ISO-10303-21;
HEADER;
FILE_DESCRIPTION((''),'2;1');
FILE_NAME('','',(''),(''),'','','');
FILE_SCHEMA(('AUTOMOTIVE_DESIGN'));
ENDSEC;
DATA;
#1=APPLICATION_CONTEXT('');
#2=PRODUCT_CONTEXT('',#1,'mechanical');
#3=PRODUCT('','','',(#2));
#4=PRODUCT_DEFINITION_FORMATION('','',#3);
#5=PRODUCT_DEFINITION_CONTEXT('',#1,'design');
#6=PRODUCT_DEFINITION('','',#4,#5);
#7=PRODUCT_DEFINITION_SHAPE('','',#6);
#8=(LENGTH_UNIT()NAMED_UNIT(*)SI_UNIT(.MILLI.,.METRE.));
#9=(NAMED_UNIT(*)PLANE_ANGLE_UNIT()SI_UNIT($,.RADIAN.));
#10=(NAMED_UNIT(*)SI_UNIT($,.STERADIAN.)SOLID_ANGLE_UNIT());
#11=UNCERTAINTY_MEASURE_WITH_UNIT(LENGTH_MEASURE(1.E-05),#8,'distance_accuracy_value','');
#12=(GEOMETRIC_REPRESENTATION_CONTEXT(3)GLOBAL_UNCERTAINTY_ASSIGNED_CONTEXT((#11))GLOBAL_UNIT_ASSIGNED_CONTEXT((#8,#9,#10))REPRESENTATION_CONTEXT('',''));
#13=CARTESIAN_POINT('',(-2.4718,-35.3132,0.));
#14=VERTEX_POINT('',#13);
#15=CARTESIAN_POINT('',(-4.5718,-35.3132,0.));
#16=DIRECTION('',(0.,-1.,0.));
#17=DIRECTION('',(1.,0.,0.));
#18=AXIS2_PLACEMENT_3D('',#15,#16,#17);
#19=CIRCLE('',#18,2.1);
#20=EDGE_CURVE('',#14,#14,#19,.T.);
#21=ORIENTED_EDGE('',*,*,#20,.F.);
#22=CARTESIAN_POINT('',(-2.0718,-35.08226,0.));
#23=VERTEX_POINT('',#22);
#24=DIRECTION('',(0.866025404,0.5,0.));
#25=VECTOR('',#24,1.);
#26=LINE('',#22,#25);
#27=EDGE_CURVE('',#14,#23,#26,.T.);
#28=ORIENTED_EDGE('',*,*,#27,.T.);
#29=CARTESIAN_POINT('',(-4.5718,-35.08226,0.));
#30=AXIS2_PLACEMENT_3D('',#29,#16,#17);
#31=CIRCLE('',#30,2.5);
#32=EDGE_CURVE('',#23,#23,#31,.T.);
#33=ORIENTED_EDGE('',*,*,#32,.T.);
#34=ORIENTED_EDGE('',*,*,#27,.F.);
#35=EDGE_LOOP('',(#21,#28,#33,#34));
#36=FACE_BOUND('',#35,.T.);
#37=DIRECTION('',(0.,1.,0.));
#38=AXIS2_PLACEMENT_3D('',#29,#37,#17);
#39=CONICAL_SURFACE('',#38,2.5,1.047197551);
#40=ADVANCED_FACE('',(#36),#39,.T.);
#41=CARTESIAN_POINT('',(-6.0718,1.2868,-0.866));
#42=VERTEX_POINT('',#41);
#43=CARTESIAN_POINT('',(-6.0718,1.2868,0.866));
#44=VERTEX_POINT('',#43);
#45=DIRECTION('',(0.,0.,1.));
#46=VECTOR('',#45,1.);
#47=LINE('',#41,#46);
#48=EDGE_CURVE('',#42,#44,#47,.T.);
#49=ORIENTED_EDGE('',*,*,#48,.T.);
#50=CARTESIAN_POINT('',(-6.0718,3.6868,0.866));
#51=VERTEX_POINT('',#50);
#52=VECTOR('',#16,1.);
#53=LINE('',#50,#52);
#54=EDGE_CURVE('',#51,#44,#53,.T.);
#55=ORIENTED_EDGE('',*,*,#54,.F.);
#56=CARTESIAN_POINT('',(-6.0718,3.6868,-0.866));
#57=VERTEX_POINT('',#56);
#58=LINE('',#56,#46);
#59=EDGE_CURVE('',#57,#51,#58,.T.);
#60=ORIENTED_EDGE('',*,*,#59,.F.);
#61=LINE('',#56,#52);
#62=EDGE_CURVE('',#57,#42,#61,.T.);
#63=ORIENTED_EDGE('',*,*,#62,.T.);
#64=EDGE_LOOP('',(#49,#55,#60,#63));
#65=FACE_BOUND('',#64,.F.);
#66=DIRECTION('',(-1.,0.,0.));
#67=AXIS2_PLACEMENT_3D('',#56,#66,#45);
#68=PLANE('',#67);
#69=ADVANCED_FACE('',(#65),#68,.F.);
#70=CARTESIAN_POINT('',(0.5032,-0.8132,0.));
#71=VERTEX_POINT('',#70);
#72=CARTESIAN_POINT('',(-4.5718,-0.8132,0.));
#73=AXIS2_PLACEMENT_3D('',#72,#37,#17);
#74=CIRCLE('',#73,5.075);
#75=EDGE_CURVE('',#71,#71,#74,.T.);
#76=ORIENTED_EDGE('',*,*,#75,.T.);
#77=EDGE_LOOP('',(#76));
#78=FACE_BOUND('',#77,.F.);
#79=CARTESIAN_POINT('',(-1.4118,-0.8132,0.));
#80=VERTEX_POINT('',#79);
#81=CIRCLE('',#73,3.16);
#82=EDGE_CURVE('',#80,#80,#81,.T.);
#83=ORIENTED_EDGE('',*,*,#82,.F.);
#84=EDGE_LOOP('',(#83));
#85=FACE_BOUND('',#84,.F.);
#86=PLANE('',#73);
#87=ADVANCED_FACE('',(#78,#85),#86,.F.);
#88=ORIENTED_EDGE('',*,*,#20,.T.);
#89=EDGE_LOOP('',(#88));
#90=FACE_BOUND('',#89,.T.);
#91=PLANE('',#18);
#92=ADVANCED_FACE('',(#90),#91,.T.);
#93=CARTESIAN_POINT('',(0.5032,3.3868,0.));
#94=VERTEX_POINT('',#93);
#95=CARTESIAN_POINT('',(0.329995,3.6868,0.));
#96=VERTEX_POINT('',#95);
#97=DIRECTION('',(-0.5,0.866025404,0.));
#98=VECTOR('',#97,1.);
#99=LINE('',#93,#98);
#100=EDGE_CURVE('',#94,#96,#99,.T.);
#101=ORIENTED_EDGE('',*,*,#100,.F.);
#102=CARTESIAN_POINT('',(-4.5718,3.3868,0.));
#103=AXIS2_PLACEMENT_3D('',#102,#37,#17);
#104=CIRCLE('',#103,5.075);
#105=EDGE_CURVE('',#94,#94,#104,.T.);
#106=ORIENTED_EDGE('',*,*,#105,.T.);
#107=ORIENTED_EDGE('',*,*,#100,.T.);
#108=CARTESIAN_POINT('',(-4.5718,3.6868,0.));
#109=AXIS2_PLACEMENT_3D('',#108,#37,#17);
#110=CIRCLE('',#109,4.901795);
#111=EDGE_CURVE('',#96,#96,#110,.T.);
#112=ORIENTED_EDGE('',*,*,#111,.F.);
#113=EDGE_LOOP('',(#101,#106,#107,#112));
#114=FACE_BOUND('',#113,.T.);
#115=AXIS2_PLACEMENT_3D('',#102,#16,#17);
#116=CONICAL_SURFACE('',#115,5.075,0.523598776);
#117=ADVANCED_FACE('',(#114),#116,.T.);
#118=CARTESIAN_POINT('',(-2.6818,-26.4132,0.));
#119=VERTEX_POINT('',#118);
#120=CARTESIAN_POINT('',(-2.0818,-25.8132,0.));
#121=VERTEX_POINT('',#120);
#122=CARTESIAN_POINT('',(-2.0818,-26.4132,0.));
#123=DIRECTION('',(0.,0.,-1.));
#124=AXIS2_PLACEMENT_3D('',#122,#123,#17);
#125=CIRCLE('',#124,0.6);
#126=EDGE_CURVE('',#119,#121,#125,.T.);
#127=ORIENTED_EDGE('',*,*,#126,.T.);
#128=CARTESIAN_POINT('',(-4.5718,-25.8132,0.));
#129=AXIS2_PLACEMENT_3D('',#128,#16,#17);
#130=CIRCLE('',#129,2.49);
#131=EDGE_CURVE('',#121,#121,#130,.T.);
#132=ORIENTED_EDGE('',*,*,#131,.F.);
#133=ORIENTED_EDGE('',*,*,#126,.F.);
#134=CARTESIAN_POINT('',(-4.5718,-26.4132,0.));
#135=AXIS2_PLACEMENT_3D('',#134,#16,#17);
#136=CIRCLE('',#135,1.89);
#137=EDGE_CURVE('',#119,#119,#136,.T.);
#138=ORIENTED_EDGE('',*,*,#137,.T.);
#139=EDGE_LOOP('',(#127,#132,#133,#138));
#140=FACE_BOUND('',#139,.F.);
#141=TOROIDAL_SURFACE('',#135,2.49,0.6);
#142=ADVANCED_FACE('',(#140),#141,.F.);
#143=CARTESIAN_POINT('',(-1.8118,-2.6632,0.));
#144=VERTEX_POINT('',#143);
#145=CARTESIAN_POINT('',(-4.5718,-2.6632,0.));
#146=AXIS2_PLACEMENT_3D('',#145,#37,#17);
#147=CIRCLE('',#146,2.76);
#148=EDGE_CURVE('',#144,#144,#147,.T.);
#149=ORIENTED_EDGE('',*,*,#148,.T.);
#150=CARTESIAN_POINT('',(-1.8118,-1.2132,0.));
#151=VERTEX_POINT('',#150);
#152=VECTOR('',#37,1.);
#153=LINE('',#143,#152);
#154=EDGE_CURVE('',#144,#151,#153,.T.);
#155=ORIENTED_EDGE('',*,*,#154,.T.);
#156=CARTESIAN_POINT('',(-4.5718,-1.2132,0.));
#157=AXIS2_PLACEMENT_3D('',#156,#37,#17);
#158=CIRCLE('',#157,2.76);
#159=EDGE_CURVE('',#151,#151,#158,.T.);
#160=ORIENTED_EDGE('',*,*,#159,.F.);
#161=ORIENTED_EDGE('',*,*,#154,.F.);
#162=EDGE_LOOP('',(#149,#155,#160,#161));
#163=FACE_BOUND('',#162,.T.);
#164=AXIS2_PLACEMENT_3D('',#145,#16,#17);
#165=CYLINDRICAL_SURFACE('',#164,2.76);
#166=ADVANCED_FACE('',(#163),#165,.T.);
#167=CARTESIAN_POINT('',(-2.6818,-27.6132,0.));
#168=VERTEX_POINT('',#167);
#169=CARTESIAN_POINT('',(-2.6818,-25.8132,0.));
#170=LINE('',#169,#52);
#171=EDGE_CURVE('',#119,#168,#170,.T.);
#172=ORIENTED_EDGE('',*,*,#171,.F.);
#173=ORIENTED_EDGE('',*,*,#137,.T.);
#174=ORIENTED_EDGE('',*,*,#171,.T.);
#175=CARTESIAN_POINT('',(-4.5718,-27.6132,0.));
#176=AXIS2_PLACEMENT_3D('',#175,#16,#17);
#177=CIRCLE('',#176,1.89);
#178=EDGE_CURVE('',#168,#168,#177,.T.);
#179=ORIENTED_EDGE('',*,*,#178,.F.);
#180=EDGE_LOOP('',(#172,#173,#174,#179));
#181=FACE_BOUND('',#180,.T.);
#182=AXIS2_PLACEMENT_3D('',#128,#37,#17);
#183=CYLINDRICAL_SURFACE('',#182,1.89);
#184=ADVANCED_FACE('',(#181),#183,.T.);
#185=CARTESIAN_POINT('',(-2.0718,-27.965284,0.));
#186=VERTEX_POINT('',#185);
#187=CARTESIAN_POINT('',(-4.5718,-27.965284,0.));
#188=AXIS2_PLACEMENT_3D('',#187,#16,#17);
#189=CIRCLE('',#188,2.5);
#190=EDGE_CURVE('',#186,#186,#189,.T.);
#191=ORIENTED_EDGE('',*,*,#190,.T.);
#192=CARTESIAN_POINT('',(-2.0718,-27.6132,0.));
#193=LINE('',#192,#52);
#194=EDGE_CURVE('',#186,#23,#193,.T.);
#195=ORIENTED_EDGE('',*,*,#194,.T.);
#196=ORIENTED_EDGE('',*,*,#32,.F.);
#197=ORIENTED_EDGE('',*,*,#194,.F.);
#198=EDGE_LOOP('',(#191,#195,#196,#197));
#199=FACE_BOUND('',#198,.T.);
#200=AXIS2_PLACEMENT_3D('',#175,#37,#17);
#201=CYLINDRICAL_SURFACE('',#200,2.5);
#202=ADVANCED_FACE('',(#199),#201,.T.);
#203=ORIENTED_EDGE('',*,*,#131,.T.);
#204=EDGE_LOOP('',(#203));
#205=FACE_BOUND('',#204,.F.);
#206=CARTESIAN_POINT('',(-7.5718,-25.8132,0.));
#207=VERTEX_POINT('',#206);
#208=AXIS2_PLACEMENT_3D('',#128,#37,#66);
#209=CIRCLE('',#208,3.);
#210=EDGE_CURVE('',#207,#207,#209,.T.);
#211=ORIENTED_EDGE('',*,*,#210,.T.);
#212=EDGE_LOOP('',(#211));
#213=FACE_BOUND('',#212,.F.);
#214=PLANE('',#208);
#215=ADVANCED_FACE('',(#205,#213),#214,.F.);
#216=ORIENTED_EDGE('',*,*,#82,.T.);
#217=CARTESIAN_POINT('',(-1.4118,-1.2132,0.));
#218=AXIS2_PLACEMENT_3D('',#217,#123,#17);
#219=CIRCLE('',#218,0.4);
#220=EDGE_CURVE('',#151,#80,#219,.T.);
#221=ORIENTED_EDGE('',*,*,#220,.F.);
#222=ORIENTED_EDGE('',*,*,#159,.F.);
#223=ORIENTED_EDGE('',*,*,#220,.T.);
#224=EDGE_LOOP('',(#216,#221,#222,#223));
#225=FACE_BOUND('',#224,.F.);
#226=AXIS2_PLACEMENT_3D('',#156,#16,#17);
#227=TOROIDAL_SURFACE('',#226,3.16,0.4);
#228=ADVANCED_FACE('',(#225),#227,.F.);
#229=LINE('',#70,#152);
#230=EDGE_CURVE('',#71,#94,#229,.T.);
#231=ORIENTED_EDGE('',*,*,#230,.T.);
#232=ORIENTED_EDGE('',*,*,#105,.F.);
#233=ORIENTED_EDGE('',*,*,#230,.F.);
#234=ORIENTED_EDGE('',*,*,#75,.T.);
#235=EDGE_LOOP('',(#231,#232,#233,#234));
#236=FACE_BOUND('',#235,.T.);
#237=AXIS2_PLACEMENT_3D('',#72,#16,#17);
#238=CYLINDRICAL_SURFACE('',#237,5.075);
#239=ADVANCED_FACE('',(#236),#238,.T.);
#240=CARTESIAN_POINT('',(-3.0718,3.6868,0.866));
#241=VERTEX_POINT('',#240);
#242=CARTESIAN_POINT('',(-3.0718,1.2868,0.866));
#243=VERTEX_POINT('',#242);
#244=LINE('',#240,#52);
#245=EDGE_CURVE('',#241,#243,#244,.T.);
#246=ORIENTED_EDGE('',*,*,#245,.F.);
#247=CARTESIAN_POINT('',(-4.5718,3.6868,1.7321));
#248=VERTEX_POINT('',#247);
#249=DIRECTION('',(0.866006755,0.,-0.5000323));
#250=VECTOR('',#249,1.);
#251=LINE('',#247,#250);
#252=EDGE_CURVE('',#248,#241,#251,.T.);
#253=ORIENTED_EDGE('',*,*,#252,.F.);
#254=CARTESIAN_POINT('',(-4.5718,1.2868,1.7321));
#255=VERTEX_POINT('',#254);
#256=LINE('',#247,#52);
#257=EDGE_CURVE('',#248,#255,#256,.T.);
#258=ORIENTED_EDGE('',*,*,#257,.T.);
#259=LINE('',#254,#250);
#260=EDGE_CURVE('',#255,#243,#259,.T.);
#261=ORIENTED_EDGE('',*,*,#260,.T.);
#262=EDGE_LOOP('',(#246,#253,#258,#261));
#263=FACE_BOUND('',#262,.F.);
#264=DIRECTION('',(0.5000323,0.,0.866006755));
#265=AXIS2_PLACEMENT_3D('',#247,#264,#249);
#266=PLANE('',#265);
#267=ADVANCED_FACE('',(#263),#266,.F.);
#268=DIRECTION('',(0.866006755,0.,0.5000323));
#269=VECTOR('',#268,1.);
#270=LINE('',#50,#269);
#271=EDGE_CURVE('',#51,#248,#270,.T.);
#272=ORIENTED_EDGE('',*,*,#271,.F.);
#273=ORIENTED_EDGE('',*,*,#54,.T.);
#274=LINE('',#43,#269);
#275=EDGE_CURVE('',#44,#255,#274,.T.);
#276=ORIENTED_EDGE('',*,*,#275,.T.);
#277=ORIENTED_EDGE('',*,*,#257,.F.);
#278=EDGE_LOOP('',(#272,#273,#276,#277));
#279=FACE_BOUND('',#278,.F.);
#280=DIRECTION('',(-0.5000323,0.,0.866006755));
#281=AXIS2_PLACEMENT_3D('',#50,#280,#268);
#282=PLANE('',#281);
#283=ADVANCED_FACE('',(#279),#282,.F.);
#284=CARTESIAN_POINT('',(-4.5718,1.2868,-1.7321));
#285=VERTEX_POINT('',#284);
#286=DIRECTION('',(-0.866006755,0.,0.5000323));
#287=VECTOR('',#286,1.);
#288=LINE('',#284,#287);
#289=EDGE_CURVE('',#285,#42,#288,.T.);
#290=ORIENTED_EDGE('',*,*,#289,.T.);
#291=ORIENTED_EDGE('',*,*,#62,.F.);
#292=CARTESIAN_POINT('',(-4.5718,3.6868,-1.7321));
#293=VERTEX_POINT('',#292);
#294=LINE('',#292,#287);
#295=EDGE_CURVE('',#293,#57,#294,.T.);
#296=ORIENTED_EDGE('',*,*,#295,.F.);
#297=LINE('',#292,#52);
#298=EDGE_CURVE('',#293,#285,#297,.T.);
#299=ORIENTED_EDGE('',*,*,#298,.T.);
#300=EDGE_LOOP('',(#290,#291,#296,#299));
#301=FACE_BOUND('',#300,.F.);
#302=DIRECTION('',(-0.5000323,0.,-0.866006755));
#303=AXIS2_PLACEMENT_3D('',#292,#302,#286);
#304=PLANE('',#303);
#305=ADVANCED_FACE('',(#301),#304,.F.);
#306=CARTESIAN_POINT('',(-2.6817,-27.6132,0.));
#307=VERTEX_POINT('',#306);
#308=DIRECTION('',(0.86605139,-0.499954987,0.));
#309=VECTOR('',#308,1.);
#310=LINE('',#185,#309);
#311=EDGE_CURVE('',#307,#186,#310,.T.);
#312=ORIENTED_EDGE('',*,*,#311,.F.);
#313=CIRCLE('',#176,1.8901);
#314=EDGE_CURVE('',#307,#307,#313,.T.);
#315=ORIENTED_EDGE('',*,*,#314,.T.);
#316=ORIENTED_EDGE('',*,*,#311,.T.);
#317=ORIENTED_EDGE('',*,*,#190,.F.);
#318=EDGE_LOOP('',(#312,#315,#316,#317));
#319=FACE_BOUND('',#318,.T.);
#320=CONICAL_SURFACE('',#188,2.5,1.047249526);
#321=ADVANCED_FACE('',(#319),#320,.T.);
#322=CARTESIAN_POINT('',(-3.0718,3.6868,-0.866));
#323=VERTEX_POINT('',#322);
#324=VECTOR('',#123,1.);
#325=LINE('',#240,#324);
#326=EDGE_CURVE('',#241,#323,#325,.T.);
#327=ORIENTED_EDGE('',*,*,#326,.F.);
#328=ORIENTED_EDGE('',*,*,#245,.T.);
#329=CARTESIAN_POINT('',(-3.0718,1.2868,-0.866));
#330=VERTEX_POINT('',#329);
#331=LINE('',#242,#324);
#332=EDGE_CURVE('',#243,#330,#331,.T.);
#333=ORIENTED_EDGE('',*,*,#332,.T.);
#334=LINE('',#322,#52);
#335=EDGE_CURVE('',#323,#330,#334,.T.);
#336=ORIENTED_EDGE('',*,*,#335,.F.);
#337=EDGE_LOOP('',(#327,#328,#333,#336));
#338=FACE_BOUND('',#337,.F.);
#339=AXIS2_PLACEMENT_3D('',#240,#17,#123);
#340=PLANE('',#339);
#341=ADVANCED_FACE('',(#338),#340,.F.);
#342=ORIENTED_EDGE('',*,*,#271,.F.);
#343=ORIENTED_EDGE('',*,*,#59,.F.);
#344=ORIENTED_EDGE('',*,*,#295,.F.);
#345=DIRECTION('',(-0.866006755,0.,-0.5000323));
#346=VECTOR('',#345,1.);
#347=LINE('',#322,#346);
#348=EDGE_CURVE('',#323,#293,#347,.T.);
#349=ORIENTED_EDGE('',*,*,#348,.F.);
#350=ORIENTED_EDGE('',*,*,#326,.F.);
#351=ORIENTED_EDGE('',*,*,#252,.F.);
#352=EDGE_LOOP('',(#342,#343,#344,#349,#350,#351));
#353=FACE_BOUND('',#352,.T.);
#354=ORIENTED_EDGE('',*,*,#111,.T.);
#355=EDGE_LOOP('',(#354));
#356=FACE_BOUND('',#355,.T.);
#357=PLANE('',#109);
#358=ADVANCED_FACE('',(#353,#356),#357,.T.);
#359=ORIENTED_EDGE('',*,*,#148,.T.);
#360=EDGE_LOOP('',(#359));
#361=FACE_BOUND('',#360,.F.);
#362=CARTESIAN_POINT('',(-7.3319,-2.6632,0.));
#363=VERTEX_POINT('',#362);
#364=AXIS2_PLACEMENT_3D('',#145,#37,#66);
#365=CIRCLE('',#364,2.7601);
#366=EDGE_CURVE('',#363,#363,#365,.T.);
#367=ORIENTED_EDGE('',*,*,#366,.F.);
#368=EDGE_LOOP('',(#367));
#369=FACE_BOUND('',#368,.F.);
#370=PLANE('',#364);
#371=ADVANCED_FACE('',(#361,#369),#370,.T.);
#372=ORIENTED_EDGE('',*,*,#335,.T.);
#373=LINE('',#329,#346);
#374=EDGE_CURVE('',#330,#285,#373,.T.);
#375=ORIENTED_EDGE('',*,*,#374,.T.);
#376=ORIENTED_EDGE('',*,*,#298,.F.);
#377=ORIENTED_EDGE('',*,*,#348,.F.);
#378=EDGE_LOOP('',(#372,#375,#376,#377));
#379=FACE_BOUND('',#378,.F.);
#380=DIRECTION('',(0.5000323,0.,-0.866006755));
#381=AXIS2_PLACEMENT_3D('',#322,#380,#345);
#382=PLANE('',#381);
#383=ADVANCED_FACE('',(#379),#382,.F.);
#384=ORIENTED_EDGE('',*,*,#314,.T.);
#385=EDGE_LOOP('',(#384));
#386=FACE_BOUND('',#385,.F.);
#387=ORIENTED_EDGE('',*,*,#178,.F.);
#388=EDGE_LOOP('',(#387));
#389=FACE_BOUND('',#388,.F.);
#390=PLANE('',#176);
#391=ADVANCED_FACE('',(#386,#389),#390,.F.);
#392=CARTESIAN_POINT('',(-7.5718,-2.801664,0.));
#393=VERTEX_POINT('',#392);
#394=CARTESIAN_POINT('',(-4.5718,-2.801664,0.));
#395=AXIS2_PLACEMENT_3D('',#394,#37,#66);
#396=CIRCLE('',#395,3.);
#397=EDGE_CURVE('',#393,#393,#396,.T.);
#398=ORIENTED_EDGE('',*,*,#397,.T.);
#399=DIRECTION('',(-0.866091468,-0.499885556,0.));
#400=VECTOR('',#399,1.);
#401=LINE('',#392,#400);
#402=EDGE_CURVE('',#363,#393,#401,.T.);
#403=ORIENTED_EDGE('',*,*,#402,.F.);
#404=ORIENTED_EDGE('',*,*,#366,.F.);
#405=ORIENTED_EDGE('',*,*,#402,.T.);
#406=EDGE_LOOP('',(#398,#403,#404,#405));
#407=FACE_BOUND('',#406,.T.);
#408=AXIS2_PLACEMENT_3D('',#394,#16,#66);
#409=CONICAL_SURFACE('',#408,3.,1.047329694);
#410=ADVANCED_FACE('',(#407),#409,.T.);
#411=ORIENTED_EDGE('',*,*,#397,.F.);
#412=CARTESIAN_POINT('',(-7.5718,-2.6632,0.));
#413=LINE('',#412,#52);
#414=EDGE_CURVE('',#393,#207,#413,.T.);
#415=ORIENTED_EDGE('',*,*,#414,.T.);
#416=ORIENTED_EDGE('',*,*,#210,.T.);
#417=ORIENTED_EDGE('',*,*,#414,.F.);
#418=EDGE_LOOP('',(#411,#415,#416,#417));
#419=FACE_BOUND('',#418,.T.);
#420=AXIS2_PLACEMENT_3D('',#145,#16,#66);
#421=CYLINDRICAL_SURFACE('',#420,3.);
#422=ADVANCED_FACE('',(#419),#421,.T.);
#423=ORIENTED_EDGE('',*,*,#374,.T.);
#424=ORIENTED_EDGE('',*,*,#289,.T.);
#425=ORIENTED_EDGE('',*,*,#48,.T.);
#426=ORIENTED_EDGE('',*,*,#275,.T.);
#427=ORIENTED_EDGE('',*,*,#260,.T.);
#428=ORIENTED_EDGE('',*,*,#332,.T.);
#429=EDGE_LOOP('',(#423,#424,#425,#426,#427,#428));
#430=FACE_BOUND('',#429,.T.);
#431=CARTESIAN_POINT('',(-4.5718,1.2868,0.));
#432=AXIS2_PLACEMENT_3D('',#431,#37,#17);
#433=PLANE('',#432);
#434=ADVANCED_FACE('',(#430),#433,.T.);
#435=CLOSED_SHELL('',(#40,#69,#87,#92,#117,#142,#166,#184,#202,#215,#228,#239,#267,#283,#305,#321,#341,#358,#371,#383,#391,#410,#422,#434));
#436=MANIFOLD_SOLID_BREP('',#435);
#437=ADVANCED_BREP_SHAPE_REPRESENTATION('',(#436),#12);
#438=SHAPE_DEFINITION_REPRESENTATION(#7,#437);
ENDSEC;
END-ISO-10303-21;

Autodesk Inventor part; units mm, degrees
ref_plane "YZ Plane" through (0, 0, 0) normal (1, 0, 0) x (0, 1, 0)
ref_plane "XZ Plane" through (0, 0, 0) normal (0, 1, 0) x (-1, 0, 0)
ref_plane "XY Plane" through (0, 0, 0) normal (0, 0, 1) x (1, 0, 0)
sketch "Sketch1" plane through (0, 0, 0) normal (0, 0, 1) x (1, 0, 0)
  line L0 (-4.5718, -2.6632) -> (-7.5718, -2.6632)
  line L1 (-7.5718, -2.6632) -> (-7.5718, -25.8132)
  line L2 (-7.5718, -25.8132) -> (-4.5718, -25.8132)
  line L3 (-4.5718, -25.8132) -> (-4.5718, -2.6632)
  dimension "d1" = 23.15
  dimension "d2" = 3
revolve "Shoulder" add sketch "Sketch1" angle 360 about axis through (-4.5718, -25.8132, 0) along (0, 1, 0)
sketch "Sketch2" plane through (-4.5718, -2.6632, 0) normal (0, 1, 0) x (1, 0, 0)
  circle A0 centre (0, 0) radius 3 projected
  circle A1 centre (0, 0) radius 2.76
  dimension "d3" = 5.52
extrude "Shoulder_neck" add sketch "Sketch2" along normal blind 1.85 contours A1
sketch "Sketch3" plane through (-4.5718, -0.8132, 0) normal (0, 1, 0) x (1, 0, 0)
  circle A0 centre (0, 0) radius 2.76 projected
  circle A1 centre (0, 0) radius 5.075
  dimension "d6" = 10.15
extrude "Head" add sketch "Sketch3" along normal blind 4.5 contours A0 | A1
sketch "Sketch4" plane through (-4.5718, -25.8132, 0) normal (0, -1, 0) x (1, 0, 0)
  circle A0 centre (0, 0) radius 3 projected
  circle A1 centre (0, 0) radius 1.89
  dimension "d9" = 3.78
extrude "Thread_neck" add sketch "Sketch4" along normal blind 1.8 contours A1
sketch "Sketch5" plane through (-4.5718, -27.6132, 0) normal (0, -1, 0) x (1, 0, 0)
  circle A0 centre (0, 0) radius 1.89 projected
  circle A1 centre (0, 0) radius 2.5
  dimension "d12" = 5
extrude "Thread_shoulder" add sketch "Sketch5" along normal blind 7.7 contours A0 | A1
sketch "Sketch6" plane through (-4.5718, 3.6868, 0) normal (0, 1, 0) x (1, 0, 0)
  circle A0 centre (0, 0) radius 5.075 projected
  circle A1 centre (0, 0) radius 1.5 construction
  line L0 (-1.5, 0.866) -> (-1.5, -0.866)
  line L1 (-1.5, -0.866) -> (0, -1.7321)
  line L2 (0, -1.7321) -> (1.5, -0.866)
  line L3 (1.5, -0.866) -> (1.5, 0.866)
  line L4 (1.5, 0.866) -> (0, 1.7321)
  line L5 (0, 1.7321) -> (-1.5, 0.866)
  dimension "d15" = 3
extrude "Hex" cut sketch "Sketch6" against normal blind 2.4 contours L5 L4 L3 L2 L1 L0
chamfer "Chamfer1" distance 0.24 angle 30 1 edges at (-1.5718, -2.6632, 0) measured on face at (-7.436, -2.6632, -0.4595)
fillet "Fillet1" radius 0.4 1 edges at (-7.3318, -0.8132, 0)
chamfer "Chamfer2" distance 0.3 angle 30 1 edges at (-9.6468, 3.6868, 0) measured on face at (0.4867, 2.1868, 0.4084)
chamfer "Chamfer3" distance 0.4 angle 30 1 edges at (-7.0718, -35.3132, 0) measured on face at (-3.3106, -35.3132, -0.6619)
fillet "Fillet2" radius 0.6 1 edges at (-6.4618, -25.8132, 0)
chamfer "Chamfer7" distance 0.61 angle 30 1 edges at (-7.0718, -27.6132, 0) measured on face at (-2.3177, -27.6132, -0.3502)
thread "Thread" size "M5x0.8" class "6g" standard "ANSI Metric M Profile" full length
equation "\"d1\" = Shoulder_length - Shoulder_neck_length"
equation "\"d2\" = 0.5 * Shoulder_diameter"
equation "\"d3\" = Shoulder_neck_dia"
equation "\"d4\" = Shoulder_neck_length"
equation "\"d6\" = Head_diameter"
equation "\"d7\" = Head_height"
equation "\"d9\" = Thread_neck_dia"
equation "\"d10\" = Thread_neck_length"
equation "\"d12\" = Thread_diameter"
equation "\"d13\" = Thread_length - Thread_neck_length"
equation "\"d15\" = Hex_size"
equation "\"d16\" = Hex_length"
equation "\"d18\" = -0.5 * Shoulder_neck_dia + 0.5 * Shoulder_diameter"
equation "\"d64\" = -0.5 * Shoulder_neck_dia + 0.5 * Shoulder_diameter"
equation "\"d21\" = 0.1 * Hex_size"
equation "\"d65\" = 0.1 * Hex_size"
equation "\"d23\" = 0.5 * Thread_pitch"
equation "\"d66\" = 0.5 * Thread_pitch"
equation "\"d25\" = Thread_neck_radius"
equation "\"d60\" = -0.5 * Thread_neck_dia + 0.5 * Thread_diameter"
equation "\"d67\" = -0.5 * Thread_neck_dia + 0.5 * Thread_diameter"
equation "\"Shoulder_diameter\" = 6"
equation "\"Shoulder_length\" = 25"
equation "\"Shoulder_neck_dia\" = 5.52"
equation "\"Thread_diameter\" = 5"
equation "\"Thread_length\" = 9.5"
equation "\"Head_diameter\" = 10.15"
equation "\"Head_height\" = 4.5"
equation "\"Thread_neck_dia\" = 3.78"
equation "\"Hex_size\" = 3"
equation "\"Hex_length\" = 2.4"
equation "\"Thread_pitch\" = 0.8"
equation "\"Shoulder_neck_length\" = 1.85"
equation "\"Thread_neck_length\" = 1.8"
equation "\"Thread_neck_radius\" = 0.6"
properties part number "SCREW,SHOULDER,P,12.9,M6X25MM" material "Steel, High Strength Low Alloy"
